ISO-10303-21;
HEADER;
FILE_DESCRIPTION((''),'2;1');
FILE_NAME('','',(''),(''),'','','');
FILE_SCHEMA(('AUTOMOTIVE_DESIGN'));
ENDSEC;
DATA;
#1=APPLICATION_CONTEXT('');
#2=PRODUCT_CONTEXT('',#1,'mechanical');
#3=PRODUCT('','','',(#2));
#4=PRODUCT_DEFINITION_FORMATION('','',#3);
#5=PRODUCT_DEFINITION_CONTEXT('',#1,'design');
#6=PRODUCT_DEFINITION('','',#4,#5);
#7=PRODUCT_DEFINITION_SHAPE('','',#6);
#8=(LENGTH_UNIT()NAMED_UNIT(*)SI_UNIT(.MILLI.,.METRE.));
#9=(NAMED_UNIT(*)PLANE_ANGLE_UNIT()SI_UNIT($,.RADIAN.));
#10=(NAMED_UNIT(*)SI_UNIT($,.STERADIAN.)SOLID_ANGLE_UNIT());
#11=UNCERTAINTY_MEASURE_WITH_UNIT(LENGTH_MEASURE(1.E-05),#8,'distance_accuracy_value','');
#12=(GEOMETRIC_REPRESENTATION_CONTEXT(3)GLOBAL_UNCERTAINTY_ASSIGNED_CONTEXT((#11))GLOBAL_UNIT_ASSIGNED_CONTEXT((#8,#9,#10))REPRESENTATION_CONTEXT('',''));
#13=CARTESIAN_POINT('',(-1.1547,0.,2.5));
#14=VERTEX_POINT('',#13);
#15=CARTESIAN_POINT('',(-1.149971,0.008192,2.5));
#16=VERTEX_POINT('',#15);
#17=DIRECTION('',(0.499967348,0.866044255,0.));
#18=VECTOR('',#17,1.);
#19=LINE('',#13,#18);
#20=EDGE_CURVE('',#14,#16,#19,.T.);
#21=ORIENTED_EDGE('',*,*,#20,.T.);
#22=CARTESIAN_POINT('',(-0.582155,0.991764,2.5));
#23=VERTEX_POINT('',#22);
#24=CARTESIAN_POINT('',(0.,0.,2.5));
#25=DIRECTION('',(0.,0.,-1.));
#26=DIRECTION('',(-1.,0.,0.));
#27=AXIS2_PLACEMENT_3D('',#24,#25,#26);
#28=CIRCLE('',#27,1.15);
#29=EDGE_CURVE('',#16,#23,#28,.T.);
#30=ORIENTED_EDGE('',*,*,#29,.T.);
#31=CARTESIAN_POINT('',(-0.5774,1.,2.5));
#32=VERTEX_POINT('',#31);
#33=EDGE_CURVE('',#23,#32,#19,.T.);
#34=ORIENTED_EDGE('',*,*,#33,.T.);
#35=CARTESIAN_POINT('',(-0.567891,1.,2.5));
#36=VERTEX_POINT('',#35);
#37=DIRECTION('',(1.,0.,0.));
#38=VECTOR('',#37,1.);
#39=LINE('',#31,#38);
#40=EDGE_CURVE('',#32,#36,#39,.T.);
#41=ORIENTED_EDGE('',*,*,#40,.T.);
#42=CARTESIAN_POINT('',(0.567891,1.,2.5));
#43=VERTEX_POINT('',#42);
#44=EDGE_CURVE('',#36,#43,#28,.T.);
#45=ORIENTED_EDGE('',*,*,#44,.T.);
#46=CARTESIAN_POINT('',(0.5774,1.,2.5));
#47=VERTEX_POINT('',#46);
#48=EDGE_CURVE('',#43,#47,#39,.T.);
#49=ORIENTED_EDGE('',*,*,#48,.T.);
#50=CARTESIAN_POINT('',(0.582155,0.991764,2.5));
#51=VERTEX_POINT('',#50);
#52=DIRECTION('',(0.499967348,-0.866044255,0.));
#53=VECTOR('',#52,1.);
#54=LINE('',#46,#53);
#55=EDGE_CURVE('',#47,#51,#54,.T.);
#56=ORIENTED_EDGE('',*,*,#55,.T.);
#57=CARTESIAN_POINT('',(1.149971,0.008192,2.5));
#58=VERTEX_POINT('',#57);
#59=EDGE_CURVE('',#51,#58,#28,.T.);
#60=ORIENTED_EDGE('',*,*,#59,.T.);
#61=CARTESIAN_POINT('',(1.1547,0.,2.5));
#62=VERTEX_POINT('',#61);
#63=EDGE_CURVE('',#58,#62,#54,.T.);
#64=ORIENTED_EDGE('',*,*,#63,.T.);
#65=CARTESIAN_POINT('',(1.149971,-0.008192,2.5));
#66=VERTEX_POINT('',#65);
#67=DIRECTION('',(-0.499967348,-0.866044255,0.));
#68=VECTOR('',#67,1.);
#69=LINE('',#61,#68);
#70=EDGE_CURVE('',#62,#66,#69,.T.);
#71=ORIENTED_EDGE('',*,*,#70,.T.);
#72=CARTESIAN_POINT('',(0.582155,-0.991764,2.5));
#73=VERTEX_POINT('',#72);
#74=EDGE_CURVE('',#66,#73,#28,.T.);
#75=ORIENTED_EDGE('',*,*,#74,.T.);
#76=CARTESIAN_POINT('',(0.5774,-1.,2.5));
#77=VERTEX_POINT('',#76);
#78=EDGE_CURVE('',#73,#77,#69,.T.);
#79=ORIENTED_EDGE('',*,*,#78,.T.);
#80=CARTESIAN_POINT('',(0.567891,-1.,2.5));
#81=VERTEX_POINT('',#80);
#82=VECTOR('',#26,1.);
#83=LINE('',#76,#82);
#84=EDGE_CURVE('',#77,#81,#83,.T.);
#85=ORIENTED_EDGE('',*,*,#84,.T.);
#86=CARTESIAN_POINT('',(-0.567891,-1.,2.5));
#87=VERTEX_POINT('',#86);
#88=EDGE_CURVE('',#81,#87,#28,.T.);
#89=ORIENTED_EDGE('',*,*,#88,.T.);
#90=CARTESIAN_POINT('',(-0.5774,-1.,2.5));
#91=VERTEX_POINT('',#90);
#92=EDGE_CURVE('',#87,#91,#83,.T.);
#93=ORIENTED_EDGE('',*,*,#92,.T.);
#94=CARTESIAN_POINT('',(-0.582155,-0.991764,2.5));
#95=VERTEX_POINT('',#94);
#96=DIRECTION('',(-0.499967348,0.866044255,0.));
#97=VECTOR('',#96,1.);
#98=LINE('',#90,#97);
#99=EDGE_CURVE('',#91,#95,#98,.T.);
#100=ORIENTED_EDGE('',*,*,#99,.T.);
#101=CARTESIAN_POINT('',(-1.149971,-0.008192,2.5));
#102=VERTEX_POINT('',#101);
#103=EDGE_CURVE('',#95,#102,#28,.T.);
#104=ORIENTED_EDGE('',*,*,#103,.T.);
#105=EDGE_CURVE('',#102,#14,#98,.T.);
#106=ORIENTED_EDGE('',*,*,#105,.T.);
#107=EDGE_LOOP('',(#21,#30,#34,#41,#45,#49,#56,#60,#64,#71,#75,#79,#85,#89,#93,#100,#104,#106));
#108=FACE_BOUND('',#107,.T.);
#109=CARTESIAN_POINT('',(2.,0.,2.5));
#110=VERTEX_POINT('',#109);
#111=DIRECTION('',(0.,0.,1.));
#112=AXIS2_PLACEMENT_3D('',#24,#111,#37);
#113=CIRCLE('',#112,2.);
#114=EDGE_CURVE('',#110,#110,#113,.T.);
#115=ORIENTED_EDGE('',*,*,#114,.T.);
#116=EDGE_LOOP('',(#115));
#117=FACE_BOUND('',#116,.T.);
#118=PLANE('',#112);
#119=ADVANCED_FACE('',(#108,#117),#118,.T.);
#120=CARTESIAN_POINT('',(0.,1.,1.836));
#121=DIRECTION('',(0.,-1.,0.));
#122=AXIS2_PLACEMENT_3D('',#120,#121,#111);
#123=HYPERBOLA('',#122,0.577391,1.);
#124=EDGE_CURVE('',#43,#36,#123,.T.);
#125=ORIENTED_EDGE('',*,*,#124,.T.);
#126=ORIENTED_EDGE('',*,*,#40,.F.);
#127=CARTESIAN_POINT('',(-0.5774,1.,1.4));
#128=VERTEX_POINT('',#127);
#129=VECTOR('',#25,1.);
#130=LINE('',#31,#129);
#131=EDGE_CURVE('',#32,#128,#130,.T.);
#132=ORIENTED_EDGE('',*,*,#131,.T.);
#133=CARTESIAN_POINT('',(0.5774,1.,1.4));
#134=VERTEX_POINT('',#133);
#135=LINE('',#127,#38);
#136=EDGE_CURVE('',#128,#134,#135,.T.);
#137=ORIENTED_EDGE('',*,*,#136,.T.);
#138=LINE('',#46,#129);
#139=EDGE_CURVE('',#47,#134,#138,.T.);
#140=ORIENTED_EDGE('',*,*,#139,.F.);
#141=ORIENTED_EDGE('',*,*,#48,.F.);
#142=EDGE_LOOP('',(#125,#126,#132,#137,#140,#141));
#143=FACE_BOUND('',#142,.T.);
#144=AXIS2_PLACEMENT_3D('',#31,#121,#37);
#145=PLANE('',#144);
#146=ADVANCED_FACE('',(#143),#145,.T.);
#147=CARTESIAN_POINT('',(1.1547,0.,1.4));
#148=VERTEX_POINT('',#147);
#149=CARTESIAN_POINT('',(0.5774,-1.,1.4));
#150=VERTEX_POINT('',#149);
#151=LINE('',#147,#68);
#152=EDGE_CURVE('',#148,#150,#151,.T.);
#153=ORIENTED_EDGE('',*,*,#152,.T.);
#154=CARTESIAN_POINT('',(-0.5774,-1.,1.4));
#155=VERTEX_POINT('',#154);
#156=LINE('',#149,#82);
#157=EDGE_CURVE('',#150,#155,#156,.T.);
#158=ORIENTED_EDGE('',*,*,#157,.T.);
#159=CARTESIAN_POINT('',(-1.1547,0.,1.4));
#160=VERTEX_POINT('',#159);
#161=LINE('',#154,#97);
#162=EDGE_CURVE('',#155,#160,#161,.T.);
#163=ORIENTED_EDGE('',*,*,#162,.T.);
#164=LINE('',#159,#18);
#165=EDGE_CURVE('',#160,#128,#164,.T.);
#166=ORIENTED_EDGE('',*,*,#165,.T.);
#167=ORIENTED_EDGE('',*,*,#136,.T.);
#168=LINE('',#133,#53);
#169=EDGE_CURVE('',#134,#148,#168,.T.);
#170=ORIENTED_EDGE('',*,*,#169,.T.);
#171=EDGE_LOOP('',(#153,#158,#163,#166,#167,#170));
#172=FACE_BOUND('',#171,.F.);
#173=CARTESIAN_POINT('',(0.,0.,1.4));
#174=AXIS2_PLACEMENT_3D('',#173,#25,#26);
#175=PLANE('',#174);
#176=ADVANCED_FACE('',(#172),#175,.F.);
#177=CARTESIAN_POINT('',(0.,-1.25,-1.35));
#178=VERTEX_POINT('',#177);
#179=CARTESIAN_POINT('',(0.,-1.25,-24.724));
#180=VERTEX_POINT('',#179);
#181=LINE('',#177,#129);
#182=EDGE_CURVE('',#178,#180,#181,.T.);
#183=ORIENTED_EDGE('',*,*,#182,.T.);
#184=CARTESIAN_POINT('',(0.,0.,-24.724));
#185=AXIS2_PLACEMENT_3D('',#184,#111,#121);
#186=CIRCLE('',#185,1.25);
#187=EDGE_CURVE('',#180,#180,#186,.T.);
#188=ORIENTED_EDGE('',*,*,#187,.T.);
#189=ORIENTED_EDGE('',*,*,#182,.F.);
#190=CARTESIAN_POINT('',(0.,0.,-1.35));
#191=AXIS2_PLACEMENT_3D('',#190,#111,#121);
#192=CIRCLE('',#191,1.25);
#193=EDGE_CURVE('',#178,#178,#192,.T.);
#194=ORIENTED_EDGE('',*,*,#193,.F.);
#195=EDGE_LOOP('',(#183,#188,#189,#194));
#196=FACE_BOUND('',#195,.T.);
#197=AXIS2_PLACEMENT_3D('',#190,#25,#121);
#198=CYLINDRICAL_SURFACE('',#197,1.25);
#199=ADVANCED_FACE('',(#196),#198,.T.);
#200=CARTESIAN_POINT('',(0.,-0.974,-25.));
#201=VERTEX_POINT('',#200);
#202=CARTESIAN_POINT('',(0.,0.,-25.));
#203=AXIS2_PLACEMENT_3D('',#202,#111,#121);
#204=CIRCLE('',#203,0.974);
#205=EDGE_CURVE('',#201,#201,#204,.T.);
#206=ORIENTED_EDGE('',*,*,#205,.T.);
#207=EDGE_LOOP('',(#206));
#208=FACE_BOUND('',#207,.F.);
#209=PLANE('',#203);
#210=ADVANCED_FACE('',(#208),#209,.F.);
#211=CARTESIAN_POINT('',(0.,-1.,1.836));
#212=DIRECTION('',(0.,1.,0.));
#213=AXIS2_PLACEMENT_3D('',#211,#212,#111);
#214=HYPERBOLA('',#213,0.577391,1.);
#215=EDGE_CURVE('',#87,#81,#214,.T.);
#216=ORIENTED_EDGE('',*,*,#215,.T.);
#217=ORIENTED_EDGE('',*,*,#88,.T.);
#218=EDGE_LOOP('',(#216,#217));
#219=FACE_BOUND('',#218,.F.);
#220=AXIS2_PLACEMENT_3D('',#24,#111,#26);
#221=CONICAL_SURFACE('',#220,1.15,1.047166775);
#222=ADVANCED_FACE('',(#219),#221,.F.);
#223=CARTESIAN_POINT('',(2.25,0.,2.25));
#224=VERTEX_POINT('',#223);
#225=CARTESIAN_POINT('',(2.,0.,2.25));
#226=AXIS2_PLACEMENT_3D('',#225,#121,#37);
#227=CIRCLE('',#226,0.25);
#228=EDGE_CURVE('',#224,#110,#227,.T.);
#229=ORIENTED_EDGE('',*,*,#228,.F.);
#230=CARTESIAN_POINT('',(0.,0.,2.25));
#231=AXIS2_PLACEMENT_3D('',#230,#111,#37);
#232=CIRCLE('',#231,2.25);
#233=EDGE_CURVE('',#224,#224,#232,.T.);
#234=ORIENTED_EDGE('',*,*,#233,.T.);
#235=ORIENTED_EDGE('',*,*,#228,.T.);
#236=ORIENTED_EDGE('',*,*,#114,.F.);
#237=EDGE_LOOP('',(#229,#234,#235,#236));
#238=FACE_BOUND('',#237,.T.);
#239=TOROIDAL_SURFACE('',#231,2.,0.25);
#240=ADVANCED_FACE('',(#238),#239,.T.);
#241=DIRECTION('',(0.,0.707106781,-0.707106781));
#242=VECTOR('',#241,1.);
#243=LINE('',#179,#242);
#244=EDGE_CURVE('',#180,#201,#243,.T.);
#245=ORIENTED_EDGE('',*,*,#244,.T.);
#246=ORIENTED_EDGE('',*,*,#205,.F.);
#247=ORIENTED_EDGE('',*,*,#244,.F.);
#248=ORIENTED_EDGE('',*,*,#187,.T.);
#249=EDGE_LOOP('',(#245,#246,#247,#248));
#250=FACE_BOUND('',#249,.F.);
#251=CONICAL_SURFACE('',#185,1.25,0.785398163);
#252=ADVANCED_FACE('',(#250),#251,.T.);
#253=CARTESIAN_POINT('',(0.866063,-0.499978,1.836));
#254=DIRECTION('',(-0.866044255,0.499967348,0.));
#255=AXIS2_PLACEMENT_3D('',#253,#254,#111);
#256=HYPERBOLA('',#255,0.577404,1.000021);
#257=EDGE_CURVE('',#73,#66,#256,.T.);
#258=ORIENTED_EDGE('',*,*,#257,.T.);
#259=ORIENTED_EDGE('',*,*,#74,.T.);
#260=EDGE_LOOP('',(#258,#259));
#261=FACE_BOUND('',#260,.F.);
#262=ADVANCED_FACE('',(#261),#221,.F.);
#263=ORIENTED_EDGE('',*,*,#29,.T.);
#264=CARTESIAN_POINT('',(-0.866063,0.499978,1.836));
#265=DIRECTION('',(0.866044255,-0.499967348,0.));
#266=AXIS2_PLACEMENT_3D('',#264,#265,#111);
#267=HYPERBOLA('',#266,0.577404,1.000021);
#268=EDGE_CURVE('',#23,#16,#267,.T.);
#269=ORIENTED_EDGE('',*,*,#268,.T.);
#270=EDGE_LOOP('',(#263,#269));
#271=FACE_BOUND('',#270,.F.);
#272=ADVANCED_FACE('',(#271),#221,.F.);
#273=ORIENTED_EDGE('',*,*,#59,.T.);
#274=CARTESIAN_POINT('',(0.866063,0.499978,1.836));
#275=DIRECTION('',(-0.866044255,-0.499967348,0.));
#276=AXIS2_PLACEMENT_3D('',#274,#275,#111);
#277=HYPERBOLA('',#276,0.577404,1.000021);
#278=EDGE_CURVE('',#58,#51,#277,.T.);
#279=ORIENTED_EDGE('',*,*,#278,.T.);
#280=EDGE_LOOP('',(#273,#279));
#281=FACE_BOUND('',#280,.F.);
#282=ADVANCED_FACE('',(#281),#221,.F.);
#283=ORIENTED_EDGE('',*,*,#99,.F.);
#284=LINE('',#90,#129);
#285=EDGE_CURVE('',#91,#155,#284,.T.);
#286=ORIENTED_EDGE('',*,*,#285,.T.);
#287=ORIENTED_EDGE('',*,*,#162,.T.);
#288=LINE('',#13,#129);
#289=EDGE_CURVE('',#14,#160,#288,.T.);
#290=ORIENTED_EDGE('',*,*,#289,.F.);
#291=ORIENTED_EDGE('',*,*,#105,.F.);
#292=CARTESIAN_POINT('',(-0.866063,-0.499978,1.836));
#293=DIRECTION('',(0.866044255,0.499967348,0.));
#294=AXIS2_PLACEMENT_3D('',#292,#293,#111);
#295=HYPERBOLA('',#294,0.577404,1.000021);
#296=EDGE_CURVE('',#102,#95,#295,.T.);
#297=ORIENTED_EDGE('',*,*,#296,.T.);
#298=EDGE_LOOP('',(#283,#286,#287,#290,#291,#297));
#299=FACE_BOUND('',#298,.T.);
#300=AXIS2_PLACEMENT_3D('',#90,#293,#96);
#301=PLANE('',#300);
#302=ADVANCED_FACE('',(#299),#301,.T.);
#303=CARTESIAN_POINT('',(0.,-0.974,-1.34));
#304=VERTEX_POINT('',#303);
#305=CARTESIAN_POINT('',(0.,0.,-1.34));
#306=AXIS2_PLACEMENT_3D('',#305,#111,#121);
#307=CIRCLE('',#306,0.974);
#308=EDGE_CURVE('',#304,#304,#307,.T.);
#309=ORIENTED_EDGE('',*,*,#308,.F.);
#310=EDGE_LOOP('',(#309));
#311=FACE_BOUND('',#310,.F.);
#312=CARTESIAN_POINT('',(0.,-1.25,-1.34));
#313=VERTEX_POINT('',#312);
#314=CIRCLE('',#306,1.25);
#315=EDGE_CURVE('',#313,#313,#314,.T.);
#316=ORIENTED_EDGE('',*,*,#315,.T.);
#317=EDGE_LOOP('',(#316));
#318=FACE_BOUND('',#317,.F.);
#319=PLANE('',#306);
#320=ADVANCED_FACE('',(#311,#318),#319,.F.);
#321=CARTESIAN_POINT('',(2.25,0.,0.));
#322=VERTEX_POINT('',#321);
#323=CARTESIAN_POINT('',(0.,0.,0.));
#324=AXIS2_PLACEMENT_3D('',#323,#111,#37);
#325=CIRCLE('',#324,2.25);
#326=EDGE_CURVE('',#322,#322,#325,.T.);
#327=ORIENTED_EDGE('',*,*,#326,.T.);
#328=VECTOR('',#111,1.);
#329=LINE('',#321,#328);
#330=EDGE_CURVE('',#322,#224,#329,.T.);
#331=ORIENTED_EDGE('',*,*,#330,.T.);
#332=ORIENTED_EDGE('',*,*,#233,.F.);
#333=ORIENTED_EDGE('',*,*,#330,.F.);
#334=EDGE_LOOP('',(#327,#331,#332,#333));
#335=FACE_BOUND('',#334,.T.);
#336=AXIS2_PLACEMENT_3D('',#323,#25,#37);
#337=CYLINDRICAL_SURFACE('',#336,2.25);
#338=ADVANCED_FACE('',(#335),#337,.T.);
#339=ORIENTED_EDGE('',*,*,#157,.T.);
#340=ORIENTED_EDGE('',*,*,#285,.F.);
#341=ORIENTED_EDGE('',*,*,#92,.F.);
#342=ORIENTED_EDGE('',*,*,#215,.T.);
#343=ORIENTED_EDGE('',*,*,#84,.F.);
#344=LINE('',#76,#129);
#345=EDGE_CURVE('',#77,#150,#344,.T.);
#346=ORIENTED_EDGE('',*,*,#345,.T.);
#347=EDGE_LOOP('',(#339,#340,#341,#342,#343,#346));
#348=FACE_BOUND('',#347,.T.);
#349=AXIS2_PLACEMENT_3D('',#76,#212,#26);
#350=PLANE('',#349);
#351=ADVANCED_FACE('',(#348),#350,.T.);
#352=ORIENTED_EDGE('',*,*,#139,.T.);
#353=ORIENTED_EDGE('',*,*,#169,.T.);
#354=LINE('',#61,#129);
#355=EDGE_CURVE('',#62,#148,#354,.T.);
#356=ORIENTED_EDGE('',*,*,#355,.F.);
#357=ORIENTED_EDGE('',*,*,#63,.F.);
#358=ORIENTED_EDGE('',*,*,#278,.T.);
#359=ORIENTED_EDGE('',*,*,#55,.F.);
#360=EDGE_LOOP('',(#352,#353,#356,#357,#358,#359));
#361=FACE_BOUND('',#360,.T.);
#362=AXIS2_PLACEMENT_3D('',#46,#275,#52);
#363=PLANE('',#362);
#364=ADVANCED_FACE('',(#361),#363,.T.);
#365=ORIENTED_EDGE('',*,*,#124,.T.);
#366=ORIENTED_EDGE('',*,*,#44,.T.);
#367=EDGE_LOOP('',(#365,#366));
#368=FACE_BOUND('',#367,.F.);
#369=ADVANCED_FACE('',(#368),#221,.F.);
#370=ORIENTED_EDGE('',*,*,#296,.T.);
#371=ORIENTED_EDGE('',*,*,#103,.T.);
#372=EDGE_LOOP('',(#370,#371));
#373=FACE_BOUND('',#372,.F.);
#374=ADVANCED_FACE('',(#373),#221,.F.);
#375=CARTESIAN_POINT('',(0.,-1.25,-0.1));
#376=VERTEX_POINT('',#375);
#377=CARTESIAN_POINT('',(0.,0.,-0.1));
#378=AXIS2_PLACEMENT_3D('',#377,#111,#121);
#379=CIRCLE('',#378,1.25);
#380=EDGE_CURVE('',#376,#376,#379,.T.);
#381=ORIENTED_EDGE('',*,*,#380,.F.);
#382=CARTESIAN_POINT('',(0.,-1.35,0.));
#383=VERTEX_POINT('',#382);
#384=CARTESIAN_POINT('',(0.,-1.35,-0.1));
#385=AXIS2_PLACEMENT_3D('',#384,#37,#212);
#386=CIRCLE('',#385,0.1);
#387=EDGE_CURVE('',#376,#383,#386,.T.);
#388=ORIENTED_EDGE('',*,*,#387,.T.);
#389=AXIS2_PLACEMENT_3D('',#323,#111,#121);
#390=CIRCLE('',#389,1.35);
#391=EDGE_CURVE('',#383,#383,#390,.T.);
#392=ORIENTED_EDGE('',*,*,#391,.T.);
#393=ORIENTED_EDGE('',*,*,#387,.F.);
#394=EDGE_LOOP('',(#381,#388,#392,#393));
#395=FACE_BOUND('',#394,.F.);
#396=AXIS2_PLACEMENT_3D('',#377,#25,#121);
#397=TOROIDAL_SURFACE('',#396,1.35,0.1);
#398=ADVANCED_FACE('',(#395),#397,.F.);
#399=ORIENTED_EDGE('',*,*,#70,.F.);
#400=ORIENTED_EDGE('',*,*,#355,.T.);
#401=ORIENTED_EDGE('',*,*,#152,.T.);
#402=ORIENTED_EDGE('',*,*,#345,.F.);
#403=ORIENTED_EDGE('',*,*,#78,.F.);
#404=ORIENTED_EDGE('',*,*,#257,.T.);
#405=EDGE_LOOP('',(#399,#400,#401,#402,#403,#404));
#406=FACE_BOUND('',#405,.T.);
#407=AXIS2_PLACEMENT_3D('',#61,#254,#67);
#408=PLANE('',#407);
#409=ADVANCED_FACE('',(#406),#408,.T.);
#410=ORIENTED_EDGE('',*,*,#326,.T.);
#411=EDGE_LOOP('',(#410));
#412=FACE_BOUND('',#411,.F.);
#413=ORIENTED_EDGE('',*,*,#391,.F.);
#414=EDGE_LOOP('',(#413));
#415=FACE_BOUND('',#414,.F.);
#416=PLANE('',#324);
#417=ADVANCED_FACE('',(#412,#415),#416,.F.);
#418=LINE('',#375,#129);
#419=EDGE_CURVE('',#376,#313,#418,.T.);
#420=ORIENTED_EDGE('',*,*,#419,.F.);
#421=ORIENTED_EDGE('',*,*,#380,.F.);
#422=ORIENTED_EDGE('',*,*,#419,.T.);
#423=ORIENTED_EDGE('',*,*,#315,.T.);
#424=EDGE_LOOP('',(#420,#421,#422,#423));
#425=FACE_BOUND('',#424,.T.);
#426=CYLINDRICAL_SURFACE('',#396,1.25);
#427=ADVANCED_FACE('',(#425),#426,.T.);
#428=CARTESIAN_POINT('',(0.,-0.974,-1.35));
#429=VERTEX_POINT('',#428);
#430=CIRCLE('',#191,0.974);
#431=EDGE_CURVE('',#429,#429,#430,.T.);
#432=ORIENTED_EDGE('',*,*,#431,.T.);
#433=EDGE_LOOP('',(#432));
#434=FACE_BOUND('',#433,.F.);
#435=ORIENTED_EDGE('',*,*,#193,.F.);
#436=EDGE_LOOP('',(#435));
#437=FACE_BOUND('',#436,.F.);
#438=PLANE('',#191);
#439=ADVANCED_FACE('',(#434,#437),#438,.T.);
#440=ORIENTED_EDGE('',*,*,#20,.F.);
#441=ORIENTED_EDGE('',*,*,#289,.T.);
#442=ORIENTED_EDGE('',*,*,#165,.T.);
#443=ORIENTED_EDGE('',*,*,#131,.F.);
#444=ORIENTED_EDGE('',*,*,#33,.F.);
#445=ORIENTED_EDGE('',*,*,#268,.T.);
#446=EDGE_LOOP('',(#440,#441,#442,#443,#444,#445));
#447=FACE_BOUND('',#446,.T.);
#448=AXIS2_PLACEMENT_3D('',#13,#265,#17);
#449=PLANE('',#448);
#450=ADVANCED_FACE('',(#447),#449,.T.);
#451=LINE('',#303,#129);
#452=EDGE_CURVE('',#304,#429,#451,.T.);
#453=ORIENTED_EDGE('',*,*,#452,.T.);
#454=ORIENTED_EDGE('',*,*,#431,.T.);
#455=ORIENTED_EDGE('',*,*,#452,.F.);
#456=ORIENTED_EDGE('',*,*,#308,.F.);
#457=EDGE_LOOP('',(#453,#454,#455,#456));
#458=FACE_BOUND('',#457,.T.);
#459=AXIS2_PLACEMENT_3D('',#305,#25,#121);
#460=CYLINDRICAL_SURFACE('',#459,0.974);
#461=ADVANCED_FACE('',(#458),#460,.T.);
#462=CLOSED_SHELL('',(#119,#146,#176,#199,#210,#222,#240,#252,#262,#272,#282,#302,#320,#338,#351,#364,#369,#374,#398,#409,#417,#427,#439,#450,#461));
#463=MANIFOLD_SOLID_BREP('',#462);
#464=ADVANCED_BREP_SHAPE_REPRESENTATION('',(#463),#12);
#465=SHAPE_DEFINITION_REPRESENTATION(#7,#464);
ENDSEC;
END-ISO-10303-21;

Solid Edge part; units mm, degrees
sketch "Sketch1" plane through (0, 0, 0) normal (0, 0, 1) x (1, 0, 0)
  circle A0 centre (0, 0) radius 2.25
extrude "Protrusion1" add sketch "Sketch1" along normal blind 2.5
sketch "Sketch2" plane through (0, 0, 2.5) normal (0, 0, 1) x (0, 1, 0)
  line L0 (0, 1.1547) -> (1, 0.5774)
  line L1 (1, 0.5774) -> (1, -0.5774)
  line L2 (1, -0.5774) -> (0, -1.1547)
  line L3 (0, -1.1547) -> (-1, -0.5774)
  line L4 (-1, -0.5774) -> (-1, 0.5774)
  line L5 (-1, 0.5774) -> (0, 1.1547)
extrude "Cutout1" cut sketch "Sketch2" against normal blind 1.1
fillet "Round1" radius 0.25 1 edges at (-2.25, 0, 2.5)
sketch "Sketch3" plane through (0, 0, 0) normal (1, 0, 0) x (0, 1, 0)
  line L0 (-0.974, -25) -> (0, -25)
  line L1 (-1.25, -24.724) -> (-0.974, -25)
  line L2 (-1.25, -1.35) -> (-1.25, -24.724)
  line L3 (-0.974, -1.35) -> (-1.25, -1.35)
  line L4 (-0.974, -1.34) -> (-0.974, -1.35)
  line L5 (-1.25, -1.34) -> (-0.974, -1.34)
  line L6 (-1.25, -0.1) -> (-1.25, -1.34)
  arc A0 (-1.25, -0.1) -> (-1.35, 0) centre (-1.35, -0.1) ccw
  dimension "D1" = 1.35
  dimension "D2" = 0.01
  dimension "D3" = 0.1
  dimension "D4" = 25
revolve "RevolvedProtrusion1" add sketch "Sketch3" angle 360 about axis through (0, 0, -60.325) along (0, 0, 1) material side at (0, -0.487, -24.95)
cosmetic_thread "Thread1" size "M2.5"
sketch "Sketch4" plane through (0, 0, 0) normal (0, -1, 0) x (1, 0, 0)
  line L0 (-1.15, 2.5) -> (0, 1.836)
revolve "RevolvedCutout1" cut sketch "Sketch4" angle 360 about axis through (0, 0, 57.15) along (0, 0, -1) material side at (-0.55, 0, 2.2113)
properties material "Stahl"
